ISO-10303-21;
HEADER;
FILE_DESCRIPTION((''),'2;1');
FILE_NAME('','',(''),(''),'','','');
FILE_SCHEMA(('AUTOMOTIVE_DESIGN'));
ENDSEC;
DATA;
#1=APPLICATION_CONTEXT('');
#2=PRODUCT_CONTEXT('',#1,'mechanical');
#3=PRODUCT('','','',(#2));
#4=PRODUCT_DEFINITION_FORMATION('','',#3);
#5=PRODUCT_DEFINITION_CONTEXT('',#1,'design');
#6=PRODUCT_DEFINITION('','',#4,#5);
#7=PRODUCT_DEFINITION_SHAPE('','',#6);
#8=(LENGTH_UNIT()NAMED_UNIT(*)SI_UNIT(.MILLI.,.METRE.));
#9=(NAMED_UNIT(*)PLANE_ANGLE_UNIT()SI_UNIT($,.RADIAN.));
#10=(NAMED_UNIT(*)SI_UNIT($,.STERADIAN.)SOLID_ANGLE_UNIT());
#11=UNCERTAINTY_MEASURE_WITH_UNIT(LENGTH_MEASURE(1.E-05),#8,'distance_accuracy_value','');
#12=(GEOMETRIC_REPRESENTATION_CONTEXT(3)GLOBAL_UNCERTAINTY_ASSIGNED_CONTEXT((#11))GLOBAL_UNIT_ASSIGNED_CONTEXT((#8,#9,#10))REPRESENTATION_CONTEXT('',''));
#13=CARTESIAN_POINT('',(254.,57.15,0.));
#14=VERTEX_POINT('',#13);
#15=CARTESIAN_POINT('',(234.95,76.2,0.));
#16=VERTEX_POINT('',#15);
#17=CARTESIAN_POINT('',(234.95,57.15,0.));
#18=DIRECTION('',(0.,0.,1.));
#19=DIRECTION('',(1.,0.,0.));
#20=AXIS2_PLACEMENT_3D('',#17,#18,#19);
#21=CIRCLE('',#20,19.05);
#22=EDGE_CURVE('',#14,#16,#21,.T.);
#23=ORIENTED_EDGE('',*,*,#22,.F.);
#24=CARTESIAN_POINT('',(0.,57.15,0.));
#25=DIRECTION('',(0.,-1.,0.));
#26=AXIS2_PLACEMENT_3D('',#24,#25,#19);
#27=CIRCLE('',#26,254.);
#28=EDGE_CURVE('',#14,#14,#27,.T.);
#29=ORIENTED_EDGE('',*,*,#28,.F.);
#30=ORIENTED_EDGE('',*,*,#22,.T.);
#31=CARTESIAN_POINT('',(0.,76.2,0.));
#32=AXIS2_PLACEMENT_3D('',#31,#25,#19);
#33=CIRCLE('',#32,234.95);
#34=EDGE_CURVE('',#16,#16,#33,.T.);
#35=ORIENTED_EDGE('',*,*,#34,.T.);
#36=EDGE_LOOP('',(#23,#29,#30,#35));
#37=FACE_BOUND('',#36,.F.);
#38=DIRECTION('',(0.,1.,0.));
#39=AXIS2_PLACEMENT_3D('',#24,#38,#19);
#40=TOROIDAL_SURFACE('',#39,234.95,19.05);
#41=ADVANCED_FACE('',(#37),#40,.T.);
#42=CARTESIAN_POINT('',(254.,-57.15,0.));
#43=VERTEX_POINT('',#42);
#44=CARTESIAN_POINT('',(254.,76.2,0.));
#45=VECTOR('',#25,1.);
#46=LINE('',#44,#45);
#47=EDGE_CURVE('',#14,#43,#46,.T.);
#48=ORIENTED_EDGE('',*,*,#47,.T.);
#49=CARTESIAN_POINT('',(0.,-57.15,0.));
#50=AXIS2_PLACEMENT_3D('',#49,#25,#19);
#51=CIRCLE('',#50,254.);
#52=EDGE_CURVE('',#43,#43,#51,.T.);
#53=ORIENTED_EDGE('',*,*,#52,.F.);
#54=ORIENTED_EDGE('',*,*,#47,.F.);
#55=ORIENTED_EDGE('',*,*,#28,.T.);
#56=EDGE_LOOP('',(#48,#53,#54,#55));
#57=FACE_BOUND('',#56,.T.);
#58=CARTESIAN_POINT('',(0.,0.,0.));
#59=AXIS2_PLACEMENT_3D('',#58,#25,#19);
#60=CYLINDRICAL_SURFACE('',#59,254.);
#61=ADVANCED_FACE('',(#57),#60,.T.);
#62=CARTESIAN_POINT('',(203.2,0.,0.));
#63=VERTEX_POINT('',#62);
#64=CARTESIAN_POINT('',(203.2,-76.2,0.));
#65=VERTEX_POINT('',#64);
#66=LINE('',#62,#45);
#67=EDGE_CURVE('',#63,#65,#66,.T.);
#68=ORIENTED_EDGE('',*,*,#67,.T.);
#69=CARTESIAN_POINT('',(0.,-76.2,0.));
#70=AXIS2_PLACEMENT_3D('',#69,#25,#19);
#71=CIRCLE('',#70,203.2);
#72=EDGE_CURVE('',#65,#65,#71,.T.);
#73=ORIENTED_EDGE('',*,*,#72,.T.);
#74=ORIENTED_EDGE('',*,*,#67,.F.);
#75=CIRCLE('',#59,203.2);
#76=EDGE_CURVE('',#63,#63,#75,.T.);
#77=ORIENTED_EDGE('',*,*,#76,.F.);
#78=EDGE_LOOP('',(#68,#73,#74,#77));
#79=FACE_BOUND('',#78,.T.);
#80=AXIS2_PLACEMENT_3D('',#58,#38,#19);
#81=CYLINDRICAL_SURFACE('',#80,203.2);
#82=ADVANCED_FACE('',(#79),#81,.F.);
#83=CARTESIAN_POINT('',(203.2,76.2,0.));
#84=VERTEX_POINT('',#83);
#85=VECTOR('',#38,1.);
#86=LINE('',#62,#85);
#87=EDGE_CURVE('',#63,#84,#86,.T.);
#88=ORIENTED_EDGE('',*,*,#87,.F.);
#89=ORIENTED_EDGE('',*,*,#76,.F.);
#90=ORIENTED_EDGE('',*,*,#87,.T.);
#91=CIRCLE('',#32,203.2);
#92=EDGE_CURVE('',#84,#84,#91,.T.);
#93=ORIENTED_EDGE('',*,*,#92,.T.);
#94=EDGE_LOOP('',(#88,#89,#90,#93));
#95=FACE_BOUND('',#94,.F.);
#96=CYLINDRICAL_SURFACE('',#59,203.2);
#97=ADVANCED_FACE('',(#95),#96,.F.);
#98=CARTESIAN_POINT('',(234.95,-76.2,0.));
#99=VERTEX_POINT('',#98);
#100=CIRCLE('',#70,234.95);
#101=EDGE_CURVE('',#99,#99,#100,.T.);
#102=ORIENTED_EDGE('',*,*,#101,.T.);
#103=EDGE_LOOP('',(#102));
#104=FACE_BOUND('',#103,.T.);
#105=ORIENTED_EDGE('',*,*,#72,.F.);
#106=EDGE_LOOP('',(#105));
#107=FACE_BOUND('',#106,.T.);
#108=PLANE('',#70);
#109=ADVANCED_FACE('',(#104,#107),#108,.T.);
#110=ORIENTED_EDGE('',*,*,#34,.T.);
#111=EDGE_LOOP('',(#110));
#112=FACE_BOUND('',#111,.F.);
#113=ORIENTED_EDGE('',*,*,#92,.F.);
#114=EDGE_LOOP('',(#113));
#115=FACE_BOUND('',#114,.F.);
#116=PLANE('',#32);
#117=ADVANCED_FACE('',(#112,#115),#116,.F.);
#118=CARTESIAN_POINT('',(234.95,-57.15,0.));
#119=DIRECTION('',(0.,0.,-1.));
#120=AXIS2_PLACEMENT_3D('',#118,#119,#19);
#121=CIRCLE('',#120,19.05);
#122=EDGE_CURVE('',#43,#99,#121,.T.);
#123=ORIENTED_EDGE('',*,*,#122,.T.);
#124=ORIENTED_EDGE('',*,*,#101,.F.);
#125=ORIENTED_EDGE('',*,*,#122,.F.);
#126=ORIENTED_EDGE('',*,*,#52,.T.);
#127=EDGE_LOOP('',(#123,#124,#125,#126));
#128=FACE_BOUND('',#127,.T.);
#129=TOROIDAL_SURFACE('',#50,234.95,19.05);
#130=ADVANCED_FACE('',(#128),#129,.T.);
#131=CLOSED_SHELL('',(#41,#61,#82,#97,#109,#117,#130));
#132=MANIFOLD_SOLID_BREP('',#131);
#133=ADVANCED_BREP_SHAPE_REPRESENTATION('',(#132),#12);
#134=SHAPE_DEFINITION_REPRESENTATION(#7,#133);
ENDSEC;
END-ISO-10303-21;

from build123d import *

# Parameters (mm, degrees)
F0_R          = 254
F0_R_2        = 203.2
F2_DEPTH      = 76.2
F2_DEPTH_BACK = 76.2
F3_R          = 19.05


# Not quite as in the source:
# - the program builds the solid bodies; features that only make, move or delete a surface that nothing else refers to are left out


with BuildPart() as f2:
    # F0 (on Front) → F2 (new body, two sides)
    with BuildSketch(Plane.XZ) as f2_sk:
        Circle(F0_R)
        Circle(F0_R_2, mode=Mode.SUBTRACT)
    extrude(amount=F2_DEPTH)
    extrude(f2_sk.sketch, amount=-F2_DEPTH_BACK)

    # F3
    f3_edges = [f2.edges().sort_by_distance(p)[0] for p in [
        (-254, 76.2, 0),
        (-254, -76.2, 0),
    ]]
    fillet(f3_edges, radius=F3_R)


solid = f2.part
